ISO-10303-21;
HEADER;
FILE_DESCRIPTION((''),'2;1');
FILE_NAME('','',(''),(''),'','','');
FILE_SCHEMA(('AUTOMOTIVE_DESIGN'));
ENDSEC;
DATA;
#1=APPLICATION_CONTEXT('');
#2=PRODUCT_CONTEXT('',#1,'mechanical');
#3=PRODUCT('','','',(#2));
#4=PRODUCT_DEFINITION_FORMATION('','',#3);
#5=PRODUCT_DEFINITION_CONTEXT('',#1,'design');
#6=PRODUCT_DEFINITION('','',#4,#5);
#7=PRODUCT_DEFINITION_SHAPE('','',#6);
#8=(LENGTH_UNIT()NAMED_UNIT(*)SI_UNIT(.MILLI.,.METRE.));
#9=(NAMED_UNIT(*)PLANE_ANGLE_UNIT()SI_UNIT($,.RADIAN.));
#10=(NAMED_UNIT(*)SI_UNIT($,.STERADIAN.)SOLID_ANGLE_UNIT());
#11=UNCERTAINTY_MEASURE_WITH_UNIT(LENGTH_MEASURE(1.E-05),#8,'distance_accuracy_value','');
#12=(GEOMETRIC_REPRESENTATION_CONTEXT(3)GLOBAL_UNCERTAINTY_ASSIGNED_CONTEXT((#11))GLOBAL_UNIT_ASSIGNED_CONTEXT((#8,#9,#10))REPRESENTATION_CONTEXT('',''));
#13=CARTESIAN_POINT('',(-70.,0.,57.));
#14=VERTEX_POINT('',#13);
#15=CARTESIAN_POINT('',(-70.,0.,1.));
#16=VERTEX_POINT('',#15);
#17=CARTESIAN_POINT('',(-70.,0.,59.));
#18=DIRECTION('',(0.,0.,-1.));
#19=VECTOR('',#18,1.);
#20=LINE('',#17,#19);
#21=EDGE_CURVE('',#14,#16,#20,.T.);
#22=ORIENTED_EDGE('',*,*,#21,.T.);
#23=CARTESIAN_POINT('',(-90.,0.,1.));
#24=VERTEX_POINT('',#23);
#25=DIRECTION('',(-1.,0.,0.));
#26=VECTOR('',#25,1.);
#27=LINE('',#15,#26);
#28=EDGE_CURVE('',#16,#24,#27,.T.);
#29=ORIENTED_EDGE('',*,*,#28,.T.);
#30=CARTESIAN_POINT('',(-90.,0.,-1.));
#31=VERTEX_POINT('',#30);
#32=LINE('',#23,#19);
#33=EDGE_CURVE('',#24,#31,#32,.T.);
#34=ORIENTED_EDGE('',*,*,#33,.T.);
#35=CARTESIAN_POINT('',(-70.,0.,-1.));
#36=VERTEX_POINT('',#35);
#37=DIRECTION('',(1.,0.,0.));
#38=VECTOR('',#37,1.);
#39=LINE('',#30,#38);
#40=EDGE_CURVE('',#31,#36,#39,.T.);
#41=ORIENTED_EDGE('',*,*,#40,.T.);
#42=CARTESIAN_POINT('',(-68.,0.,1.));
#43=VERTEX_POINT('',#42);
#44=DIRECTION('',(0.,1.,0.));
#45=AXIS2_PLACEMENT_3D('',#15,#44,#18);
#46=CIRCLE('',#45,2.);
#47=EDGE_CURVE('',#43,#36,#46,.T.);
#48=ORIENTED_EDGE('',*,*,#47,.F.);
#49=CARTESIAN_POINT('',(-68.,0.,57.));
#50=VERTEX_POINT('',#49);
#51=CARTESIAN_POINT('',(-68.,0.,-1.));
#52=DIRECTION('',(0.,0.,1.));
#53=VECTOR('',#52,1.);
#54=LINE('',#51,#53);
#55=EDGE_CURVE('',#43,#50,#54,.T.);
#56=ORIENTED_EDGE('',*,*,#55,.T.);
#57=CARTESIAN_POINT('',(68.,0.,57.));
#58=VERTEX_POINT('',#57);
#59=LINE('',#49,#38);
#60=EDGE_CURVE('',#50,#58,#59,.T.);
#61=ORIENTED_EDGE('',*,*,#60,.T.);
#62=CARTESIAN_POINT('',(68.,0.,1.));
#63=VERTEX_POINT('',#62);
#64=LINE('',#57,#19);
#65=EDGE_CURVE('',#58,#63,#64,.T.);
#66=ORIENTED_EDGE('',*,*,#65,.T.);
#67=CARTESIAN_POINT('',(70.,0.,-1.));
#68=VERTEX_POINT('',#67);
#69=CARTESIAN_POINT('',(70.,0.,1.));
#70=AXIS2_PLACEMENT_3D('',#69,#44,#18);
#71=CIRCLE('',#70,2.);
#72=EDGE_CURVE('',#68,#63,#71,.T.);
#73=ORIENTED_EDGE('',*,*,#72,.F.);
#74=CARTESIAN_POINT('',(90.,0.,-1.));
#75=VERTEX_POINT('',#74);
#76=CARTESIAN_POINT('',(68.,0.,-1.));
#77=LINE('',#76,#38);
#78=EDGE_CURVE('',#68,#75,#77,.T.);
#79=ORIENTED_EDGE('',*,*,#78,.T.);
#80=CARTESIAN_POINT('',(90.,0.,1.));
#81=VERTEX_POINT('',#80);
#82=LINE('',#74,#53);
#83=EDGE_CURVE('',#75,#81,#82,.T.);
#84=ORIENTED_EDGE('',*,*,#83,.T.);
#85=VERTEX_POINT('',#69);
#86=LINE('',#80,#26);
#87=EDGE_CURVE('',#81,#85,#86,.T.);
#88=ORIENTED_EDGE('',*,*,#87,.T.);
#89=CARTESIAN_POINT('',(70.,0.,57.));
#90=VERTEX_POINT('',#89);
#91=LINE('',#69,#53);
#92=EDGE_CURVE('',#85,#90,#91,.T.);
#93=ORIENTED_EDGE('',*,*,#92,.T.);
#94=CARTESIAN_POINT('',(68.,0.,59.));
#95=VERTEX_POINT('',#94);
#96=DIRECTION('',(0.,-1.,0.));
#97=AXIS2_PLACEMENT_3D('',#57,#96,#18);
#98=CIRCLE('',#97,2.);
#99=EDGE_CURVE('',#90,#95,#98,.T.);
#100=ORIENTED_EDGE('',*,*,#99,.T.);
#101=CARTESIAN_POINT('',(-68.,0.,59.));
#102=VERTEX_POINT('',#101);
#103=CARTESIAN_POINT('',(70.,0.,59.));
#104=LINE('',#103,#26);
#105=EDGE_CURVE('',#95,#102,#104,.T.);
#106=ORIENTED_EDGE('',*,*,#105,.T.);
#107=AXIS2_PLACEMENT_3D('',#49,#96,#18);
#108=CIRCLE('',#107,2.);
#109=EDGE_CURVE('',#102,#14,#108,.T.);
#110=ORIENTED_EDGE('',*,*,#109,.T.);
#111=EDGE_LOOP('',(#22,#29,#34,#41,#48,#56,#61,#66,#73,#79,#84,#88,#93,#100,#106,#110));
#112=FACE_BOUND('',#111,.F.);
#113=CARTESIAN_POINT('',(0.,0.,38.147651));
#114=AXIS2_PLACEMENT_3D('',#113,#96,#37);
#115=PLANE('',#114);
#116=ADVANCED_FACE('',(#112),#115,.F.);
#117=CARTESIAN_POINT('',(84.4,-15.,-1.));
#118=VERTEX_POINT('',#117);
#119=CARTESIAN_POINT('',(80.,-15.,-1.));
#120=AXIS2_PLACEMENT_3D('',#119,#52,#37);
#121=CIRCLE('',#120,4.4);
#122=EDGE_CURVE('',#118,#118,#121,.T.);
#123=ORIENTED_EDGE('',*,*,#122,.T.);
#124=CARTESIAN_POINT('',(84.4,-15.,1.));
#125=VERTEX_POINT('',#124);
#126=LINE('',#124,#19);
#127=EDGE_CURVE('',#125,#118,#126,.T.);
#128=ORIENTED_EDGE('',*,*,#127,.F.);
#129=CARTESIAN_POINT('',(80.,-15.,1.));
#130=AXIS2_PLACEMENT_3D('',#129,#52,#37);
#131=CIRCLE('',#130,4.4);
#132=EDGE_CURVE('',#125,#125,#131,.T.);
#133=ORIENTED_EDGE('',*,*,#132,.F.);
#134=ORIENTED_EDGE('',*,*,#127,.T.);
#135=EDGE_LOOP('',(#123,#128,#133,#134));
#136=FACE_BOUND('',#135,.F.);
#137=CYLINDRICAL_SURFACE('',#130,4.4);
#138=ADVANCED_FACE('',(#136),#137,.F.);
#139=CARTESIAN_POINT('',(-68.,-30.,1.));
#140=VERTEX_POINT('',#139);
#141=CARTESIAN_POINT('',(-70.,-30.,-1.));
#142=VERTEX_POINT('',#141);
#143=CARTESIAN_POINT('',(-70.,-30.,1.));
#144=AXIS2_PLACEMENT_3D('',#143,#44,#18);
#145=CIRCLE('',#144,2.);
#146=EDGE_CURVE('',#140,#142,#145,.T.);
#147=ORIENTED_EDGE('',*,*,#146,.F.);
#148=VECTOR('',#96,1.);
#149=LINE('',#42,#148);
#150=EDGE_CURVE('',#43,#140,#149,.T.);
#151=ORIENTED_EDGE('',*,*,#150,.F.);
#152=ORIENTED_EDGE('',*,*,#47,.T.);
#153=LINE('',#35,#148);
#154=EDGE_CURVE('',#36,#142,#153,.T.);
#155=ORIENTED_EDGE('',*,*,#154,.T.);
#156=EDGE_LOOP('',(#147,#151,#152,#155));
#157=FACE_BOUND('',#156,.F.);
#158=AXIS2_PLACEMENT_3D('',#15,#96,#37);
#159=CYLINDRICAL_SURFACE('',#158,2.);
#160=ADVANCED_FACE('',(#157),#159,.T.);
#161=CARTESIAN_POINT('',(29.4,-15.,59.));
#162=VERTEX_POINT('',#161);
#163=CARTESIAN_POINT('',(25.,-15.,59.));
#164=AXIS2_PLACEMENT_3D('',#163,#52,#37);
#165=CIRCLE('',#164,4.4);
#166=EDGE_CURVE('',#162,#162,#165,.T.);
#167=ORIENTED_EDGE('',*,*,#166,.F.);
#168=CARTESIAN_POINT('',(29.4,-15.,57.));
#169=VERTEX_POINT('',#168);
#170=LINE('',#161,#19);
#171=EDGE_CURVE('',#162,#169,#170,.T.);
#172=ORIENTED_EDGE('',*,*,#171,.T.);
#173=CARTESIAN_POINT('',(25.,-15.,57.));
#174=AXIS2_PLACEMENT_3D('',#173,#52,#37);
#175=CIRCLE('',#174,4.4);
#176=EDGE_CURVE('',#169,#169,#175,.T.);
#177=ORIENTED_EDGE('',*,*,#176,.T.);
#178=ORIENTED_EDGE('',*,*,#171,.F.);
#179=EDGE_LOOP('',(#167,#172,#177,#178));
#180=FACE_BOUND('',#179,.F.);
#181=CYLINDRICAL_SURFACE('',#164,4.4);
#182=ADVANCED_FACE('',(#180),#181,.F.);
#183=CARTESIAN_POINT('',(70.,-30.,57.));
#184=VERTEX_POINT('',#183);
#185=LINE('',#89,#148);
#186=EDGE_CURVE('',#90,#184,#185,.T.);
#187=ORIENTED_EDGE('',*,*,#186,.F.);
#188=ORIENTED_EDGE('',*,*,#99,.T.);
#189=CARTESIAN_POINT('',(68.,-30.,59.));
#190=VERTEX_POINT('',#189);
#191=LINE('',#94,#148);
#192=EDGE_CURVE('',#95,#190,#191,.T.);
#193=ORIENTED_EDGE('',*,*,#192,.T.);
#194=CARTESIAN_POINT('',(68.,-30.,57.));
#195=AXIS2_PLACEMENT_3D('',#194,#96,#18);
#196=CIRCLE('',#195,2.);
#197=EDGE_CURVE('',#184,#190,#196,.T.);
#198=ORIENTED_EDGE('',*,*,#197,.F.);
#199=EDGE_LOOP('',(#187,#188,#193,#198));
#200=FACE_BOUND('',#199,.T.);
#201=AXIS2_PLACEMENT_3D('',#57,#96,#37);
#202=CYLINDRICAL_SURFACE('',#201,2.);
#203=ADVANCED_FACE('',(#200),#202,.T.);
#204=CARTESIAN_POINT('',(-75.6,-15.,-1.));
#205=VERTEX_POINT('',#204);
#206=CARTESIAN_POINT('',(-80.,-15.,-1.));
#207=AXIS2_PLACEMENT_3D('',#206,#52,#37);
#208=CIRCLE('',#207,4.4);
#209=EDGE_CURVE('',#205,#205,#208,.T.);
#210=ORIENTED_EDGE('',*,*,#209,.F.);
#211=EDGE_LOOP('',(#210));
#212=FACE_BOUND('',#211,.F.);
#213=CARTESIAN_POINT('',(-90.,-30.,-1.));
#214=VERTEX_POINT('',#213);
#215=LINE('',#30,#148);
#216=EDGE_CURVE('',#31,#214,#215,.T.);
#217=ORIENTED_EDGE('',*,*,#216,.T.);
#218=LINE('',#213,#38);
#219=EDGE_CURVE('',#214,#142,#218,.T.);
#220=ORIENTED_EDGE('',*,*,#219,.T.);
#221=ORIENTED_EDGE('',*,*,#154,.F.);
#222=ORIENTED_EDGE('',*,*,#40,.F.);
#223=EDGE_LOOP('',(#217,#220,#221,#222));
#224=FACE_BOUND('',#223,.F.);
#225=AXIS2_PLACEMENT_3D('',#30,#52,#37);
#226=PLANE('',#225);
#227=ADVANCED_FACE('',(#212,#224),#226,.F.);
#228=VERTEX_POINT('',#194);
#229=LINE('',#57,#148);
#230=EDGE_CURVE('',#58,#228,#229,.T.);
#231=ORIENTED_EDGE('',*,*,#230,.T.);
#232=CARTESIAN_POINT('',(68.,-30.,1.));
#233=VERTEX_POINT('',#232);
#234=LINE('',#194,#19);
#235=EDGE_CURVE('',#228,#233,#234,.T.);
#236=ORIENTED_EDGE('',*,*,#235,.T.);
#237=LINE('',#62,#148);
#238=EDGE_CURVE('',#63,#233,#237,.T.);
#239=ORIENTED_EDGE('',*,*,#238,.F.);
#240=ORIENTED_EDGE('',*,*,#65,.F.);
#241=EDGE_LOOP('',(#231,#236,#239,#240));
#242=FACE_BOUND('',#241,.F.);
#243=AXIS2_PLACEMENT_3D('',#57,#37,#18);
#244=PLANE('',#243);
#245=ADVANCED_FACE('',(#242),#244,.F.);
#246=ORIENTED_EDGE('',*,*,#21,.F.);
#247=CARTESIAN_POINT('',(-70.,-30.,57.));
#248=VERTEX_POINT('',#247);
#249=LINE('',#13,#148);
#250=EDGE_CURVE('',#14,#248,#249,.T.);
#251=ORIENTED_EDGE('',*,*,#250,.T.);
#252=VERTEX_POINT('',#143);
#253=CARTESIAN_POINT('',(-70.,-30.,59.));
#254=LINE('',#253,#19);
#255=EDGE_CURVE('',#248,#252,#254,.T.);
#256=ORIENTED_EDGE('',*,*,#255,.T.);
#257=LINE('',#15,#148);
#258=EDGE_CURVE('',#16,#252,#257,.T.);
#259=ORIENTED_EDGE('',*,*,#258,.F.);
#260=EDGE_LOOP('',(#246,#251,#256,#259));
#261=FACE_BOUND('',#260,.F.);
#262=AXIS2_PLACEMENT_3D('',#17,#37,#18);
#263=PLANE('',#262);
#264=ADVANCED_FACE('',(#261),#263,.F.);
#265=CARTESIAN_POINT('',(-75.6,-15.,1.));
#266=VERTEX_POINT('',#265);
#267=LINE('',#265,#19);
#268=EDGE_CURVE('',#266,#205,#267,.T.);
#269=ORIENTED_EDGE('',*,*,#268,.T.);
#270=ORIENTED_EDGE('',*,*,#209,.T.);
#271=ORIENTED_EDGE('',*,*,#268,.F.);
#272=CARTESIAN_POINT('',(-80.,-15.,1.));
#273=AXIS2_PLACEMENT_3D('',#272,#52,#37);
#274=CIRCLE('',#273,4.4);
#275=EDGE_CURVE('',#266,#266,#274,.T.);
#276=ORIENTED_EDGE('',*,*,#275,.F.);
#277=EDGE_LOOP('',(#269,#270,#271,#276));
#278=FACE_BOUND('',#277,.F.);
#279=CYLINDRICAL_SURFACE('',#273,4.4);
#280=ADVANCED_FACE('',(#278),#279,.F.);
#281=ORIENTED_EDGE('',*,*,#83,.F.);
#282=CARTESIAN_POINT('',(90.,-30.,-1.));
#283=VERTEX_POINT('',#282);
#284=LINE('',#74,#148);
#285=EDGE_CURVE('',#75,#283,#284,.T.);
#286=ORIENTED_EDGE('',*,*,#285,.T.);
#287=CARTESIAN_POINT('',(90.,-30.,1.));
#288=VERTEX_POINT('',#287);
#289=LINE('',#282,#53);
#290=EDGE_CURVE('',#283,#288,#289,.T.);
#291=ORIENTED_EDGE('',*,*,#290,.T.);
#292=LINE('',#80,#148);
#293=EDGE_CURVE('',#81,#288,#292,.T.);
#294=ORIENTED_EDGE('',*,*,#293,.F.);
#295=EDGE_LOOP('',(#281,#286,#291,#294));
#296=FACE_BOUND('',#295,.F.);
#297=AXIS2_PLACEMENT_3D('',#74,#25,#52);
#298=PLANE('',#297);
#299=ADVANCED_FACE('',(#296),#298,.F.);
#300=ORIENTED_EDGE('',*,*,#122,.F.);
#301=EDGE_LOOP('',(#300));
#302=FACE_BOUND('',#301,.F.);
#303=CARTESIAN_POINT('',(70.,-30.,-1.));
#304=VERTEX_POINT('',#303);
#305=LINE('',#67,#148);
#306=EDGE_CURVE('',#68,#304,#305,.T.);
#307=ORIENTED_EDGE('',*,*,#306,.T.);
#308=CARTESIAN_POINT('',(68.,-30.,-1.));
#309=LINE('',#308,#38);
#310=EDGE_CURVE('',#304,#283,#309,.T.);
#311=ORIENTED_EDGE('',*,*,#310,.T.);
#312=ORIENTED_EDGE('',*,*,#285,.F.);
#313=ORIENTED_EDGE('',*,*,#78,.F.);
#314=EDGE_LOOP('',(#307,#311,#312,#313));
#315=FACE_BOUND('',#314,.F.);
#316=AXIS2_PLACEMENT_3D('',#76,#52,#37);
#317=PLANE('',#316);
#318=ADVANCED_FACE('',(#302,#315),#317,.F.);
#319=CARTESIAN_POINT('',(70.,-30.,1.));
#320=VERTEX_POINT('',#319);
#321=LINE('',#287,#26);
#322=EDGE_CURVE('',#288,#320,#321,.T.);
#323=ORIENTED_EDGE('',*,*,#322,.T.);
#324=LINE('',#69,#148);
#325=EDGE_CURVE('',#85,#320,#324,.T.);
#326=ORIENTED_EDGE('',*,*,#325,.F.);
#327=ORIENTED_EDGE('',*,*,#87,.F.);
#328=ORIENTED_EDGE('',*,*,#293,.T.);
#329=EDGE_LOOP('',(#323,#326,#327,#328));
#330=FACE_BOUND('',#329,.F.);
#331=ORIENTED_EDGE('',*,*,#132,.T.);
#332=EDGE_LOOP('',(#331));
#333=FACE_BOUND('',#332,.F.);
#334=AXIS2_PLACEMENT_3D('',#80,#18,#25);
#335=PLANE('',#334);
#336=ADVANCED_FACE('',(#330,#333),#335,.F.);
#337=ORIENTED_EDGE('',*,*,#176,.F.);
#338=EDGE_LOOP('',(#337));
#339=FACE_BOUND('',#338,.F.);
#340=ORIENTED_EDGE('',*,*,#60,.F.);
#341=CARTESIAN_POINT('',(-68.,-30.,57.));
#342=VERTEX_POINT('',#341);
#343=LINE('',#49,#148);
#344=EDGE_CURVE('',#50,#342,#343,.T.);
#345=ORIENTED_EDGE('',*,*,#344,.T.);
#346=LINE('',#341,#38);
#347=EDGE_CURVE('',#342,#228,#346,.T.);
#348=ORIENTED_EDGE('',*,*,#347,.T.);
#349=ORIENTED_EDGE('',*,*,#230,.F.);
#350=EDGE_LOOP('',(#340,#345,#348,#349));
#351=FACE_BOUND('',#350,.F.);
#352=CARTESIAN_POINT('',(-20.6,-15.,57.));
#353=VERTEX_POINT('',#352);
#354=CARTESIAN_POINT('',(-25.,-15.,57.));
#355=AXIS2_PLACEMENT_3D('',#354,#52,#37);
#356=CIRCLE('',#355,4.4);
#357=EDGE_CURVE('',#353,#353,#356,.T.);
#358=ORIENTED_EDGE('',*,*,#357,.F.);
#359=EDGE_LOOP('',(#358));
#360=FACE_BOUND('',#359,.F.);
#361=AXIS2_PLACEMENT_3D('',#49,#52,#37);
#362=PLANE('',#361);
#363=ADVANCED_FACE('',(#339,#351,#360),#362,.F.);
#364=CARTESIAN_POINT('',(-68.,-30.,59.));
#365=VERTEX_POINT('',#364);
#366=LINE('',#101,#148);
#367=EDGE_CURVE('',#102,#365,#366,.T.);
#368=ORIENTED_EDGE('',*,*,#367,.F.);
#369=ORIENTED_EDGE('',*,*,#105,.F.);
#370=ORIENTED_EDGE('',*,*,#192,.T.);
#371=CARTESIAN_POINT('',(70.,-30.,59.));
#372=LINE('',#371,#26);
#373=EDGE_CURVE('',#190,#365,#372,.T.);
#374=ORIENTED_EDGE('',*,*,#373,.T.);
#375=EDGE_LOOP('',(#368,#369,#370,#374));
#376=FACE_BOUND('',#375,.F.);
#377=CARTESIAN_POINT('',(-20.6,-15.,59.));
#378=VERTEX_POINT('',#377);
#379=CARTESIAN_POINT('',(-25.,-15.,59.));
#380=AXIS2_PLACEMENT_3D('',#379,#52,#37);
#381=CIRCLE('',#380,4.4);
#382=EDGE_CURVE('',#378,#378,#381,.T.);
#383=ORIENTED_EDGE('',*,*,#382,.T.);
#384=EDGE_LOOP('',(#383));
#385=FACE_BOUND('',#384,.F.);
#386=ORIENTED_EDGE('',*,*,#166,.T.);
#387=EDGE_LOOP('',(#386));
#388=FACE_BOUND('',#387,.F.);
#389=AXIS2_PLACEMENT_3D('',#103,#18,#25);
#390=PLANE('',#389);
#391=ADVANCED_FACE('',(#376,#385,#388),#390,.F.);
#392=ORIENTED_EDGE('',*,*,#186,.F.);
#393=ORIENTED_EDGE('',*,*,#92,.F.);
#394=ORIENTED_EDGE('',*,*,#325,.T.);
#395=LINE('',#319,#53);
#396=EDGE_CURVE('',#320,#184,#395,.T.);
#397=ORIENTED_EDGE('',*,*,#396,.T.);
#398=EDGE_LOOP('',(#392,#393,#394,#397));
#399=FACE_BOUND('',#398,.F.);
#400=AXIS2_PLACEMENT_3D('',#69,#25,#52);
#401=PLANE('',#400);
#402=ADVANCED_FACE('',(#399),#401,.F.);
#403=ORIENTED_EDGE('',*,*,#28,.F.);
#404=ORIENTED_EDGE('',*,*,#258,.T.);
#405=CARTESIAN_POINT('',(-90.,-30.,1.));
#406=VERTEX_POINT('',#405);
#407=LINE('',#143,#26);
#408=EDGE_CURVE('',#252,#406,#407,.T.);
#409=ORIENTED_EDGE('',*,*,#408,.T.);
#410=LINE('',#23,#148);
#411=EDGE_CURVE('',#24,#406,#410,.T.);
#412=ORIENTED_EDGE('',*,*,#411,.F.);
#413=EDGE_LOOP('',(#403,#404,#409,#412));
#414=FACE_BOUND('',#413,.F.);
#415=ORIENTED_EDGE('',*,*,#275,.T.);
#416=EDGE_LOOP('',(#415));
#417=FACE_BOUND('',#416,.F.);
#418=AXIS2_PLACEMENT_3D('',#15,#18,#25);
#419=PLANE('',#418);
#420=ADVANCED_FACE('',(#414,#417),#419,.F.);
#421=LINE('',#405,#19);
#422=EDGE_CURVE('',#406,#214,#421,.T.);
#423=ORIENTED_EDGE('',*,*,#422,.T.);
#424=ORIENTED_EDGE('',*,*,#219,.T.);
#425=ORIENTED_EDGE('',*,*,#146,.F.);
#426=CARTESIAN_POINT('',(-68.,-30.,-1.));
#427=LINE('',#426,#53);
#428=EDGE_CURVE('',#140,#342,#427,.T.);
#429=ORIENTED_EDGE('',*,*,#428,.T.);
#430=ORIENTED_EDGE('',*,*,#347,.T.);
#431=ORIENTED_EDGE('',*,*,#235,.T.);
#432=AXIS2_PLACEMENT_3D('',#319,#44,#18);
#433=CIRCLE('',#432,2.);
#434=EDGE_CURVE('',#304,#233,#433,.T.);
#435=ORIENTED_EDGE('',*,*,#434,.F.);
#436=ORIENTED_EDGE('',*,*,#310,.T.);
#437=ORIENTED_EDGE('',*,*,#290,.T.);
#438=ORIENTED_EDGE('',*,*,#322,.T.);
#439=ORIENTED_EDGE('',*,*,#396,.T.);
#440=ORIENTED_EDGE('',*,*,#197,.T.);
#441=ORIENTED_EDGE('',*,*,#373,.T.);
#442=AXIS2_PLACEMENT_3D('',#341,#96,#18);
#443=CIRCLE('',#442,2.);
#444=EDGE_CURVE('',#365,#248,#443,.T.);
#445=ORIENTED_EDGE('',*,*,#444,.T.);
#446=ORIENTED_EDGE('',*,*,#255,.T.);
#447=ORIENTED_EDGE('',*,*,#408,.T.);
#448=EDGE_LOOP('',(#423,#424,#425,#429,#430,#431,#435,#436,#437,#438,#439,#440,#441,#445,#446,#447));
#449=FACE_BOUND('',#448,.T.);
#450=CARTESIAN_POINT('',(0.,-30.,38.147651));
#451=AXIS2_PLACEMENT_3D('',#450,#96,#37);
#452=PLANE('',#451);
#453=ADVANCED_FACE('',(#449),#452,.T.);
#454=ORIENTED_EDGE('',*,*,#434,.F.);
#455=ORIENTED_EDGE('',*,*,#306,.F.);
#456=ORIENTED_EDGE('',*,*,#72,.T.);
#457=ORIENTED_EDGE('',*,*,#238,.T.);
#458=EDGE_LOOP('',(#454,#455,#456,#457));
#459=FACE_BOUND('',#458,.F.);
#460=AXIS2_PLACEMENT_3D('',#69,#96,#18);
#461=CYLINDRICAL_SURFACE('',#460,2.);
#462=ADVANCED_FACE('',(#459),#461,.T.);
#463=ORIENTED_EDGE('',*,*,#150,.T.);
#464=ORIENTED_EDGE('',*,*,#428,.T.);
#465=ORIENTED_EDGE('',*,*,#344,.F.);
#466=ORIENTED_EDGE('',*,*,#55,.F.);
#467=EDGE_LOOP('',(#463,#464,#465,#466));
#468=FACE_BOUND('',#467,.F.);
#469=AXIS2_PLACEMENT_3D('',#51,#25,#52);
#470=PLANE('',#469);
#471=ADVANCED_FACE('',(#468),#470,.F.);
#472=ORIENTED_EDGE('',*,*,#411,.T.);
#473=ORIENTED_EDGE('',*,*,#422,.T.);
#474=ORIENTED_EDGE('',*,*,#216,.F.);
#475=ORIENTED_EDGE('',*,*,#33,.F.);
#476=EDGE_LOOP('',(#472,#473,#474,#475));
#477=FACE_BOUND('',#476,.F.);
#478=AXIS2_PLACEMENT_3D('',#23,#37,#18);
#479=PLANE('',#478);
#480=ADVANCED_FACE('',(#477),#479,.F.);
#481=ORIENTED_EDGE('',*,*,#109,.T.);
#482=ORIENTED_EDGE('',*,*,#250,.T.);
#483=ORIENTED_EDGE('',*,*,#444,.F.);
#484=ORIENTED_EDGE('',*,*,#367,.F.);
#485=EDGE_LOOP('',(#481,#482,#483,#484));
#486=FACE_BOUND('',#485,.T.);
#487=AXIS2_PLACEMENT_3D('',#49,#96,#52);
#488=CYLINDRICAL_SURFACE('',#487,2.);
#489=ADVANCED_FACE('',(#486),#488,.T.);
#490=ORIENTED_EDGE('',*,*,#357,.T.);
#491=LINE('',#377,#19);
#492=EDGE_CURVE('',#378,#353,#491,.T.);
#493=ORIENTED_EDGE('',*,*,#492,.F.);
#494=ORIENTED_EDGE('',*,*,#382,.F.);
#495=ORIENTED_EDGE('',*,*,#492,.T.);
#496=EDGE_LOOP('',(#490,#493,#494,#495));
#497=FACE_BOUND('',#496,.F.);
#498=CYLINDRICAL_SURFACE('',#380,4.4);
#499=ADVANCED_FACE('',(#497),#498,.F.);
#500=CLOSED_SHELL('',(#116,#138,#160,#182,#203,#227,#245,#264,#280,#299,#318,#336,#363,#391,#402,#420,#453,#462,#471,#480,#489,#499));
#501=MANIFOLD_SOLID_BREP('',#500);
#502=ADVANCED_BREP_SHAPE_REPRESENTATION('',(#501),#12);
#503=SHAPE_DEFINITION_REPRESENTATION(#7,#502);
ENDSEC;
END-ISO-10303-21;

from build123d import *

# Parameters (mm, degrees)
F1_DEPTH = 30
F2_R     = 4.4
F3_R     = 4.4
F4_DEPTH = 25
F5_R     = 2
F6_R     = 2


# Not quite as in the source:
# - a feature names something its author has since deleted; it is built from what else it names


with BuildPart() as f1:
    # F0 (on Front) → F1 (new body)
    with BuildSketch(Plane.XZ):
        Polygon((90, -1), (90, 1), (70, 1), (70, 59), (-70, 59), (-70, 1), (-90, 1), (-90, -1), (-68, -1), (-68, 57), (68, 57), (68, -1), align=None)
    extrude(amount=F1_DEPTH)

    # F2 (on face) + F3 (on face) → F4 (cut)
    with BuildSketch(Plane.XY.offset(1)):
        with Locations((-80, -15)):
            Circle(F2_R)
        with Locations((80, -15)):
            Circle(F2_R)
    with BuildSketch(Plane.XY.offset(59)):
        with Locations((-25, -15)):
            Circle(F3_R)
        with Locations((25, -15)):
            Circle(F3_R)
    extrude(amount=-F4_DEPTH, mode=Mode.SUBTRACT)

    # F5
    f5_edges = [f1.edges().sort_by_distance(p)[0] for p in [
        (-70, -15, 59),
        (70, -15, 59),
    ]]
    fillet(f5_edges, radius=F5_R)

    # F6
    f6_edges = [f1.edges().sort_by_distance(p)[0] for p in [
        (68, -15, -1),
        (-68, -15, -1),
    ]]
    fillet(f6_edges, radius=F6_R)


solid = f1.part
